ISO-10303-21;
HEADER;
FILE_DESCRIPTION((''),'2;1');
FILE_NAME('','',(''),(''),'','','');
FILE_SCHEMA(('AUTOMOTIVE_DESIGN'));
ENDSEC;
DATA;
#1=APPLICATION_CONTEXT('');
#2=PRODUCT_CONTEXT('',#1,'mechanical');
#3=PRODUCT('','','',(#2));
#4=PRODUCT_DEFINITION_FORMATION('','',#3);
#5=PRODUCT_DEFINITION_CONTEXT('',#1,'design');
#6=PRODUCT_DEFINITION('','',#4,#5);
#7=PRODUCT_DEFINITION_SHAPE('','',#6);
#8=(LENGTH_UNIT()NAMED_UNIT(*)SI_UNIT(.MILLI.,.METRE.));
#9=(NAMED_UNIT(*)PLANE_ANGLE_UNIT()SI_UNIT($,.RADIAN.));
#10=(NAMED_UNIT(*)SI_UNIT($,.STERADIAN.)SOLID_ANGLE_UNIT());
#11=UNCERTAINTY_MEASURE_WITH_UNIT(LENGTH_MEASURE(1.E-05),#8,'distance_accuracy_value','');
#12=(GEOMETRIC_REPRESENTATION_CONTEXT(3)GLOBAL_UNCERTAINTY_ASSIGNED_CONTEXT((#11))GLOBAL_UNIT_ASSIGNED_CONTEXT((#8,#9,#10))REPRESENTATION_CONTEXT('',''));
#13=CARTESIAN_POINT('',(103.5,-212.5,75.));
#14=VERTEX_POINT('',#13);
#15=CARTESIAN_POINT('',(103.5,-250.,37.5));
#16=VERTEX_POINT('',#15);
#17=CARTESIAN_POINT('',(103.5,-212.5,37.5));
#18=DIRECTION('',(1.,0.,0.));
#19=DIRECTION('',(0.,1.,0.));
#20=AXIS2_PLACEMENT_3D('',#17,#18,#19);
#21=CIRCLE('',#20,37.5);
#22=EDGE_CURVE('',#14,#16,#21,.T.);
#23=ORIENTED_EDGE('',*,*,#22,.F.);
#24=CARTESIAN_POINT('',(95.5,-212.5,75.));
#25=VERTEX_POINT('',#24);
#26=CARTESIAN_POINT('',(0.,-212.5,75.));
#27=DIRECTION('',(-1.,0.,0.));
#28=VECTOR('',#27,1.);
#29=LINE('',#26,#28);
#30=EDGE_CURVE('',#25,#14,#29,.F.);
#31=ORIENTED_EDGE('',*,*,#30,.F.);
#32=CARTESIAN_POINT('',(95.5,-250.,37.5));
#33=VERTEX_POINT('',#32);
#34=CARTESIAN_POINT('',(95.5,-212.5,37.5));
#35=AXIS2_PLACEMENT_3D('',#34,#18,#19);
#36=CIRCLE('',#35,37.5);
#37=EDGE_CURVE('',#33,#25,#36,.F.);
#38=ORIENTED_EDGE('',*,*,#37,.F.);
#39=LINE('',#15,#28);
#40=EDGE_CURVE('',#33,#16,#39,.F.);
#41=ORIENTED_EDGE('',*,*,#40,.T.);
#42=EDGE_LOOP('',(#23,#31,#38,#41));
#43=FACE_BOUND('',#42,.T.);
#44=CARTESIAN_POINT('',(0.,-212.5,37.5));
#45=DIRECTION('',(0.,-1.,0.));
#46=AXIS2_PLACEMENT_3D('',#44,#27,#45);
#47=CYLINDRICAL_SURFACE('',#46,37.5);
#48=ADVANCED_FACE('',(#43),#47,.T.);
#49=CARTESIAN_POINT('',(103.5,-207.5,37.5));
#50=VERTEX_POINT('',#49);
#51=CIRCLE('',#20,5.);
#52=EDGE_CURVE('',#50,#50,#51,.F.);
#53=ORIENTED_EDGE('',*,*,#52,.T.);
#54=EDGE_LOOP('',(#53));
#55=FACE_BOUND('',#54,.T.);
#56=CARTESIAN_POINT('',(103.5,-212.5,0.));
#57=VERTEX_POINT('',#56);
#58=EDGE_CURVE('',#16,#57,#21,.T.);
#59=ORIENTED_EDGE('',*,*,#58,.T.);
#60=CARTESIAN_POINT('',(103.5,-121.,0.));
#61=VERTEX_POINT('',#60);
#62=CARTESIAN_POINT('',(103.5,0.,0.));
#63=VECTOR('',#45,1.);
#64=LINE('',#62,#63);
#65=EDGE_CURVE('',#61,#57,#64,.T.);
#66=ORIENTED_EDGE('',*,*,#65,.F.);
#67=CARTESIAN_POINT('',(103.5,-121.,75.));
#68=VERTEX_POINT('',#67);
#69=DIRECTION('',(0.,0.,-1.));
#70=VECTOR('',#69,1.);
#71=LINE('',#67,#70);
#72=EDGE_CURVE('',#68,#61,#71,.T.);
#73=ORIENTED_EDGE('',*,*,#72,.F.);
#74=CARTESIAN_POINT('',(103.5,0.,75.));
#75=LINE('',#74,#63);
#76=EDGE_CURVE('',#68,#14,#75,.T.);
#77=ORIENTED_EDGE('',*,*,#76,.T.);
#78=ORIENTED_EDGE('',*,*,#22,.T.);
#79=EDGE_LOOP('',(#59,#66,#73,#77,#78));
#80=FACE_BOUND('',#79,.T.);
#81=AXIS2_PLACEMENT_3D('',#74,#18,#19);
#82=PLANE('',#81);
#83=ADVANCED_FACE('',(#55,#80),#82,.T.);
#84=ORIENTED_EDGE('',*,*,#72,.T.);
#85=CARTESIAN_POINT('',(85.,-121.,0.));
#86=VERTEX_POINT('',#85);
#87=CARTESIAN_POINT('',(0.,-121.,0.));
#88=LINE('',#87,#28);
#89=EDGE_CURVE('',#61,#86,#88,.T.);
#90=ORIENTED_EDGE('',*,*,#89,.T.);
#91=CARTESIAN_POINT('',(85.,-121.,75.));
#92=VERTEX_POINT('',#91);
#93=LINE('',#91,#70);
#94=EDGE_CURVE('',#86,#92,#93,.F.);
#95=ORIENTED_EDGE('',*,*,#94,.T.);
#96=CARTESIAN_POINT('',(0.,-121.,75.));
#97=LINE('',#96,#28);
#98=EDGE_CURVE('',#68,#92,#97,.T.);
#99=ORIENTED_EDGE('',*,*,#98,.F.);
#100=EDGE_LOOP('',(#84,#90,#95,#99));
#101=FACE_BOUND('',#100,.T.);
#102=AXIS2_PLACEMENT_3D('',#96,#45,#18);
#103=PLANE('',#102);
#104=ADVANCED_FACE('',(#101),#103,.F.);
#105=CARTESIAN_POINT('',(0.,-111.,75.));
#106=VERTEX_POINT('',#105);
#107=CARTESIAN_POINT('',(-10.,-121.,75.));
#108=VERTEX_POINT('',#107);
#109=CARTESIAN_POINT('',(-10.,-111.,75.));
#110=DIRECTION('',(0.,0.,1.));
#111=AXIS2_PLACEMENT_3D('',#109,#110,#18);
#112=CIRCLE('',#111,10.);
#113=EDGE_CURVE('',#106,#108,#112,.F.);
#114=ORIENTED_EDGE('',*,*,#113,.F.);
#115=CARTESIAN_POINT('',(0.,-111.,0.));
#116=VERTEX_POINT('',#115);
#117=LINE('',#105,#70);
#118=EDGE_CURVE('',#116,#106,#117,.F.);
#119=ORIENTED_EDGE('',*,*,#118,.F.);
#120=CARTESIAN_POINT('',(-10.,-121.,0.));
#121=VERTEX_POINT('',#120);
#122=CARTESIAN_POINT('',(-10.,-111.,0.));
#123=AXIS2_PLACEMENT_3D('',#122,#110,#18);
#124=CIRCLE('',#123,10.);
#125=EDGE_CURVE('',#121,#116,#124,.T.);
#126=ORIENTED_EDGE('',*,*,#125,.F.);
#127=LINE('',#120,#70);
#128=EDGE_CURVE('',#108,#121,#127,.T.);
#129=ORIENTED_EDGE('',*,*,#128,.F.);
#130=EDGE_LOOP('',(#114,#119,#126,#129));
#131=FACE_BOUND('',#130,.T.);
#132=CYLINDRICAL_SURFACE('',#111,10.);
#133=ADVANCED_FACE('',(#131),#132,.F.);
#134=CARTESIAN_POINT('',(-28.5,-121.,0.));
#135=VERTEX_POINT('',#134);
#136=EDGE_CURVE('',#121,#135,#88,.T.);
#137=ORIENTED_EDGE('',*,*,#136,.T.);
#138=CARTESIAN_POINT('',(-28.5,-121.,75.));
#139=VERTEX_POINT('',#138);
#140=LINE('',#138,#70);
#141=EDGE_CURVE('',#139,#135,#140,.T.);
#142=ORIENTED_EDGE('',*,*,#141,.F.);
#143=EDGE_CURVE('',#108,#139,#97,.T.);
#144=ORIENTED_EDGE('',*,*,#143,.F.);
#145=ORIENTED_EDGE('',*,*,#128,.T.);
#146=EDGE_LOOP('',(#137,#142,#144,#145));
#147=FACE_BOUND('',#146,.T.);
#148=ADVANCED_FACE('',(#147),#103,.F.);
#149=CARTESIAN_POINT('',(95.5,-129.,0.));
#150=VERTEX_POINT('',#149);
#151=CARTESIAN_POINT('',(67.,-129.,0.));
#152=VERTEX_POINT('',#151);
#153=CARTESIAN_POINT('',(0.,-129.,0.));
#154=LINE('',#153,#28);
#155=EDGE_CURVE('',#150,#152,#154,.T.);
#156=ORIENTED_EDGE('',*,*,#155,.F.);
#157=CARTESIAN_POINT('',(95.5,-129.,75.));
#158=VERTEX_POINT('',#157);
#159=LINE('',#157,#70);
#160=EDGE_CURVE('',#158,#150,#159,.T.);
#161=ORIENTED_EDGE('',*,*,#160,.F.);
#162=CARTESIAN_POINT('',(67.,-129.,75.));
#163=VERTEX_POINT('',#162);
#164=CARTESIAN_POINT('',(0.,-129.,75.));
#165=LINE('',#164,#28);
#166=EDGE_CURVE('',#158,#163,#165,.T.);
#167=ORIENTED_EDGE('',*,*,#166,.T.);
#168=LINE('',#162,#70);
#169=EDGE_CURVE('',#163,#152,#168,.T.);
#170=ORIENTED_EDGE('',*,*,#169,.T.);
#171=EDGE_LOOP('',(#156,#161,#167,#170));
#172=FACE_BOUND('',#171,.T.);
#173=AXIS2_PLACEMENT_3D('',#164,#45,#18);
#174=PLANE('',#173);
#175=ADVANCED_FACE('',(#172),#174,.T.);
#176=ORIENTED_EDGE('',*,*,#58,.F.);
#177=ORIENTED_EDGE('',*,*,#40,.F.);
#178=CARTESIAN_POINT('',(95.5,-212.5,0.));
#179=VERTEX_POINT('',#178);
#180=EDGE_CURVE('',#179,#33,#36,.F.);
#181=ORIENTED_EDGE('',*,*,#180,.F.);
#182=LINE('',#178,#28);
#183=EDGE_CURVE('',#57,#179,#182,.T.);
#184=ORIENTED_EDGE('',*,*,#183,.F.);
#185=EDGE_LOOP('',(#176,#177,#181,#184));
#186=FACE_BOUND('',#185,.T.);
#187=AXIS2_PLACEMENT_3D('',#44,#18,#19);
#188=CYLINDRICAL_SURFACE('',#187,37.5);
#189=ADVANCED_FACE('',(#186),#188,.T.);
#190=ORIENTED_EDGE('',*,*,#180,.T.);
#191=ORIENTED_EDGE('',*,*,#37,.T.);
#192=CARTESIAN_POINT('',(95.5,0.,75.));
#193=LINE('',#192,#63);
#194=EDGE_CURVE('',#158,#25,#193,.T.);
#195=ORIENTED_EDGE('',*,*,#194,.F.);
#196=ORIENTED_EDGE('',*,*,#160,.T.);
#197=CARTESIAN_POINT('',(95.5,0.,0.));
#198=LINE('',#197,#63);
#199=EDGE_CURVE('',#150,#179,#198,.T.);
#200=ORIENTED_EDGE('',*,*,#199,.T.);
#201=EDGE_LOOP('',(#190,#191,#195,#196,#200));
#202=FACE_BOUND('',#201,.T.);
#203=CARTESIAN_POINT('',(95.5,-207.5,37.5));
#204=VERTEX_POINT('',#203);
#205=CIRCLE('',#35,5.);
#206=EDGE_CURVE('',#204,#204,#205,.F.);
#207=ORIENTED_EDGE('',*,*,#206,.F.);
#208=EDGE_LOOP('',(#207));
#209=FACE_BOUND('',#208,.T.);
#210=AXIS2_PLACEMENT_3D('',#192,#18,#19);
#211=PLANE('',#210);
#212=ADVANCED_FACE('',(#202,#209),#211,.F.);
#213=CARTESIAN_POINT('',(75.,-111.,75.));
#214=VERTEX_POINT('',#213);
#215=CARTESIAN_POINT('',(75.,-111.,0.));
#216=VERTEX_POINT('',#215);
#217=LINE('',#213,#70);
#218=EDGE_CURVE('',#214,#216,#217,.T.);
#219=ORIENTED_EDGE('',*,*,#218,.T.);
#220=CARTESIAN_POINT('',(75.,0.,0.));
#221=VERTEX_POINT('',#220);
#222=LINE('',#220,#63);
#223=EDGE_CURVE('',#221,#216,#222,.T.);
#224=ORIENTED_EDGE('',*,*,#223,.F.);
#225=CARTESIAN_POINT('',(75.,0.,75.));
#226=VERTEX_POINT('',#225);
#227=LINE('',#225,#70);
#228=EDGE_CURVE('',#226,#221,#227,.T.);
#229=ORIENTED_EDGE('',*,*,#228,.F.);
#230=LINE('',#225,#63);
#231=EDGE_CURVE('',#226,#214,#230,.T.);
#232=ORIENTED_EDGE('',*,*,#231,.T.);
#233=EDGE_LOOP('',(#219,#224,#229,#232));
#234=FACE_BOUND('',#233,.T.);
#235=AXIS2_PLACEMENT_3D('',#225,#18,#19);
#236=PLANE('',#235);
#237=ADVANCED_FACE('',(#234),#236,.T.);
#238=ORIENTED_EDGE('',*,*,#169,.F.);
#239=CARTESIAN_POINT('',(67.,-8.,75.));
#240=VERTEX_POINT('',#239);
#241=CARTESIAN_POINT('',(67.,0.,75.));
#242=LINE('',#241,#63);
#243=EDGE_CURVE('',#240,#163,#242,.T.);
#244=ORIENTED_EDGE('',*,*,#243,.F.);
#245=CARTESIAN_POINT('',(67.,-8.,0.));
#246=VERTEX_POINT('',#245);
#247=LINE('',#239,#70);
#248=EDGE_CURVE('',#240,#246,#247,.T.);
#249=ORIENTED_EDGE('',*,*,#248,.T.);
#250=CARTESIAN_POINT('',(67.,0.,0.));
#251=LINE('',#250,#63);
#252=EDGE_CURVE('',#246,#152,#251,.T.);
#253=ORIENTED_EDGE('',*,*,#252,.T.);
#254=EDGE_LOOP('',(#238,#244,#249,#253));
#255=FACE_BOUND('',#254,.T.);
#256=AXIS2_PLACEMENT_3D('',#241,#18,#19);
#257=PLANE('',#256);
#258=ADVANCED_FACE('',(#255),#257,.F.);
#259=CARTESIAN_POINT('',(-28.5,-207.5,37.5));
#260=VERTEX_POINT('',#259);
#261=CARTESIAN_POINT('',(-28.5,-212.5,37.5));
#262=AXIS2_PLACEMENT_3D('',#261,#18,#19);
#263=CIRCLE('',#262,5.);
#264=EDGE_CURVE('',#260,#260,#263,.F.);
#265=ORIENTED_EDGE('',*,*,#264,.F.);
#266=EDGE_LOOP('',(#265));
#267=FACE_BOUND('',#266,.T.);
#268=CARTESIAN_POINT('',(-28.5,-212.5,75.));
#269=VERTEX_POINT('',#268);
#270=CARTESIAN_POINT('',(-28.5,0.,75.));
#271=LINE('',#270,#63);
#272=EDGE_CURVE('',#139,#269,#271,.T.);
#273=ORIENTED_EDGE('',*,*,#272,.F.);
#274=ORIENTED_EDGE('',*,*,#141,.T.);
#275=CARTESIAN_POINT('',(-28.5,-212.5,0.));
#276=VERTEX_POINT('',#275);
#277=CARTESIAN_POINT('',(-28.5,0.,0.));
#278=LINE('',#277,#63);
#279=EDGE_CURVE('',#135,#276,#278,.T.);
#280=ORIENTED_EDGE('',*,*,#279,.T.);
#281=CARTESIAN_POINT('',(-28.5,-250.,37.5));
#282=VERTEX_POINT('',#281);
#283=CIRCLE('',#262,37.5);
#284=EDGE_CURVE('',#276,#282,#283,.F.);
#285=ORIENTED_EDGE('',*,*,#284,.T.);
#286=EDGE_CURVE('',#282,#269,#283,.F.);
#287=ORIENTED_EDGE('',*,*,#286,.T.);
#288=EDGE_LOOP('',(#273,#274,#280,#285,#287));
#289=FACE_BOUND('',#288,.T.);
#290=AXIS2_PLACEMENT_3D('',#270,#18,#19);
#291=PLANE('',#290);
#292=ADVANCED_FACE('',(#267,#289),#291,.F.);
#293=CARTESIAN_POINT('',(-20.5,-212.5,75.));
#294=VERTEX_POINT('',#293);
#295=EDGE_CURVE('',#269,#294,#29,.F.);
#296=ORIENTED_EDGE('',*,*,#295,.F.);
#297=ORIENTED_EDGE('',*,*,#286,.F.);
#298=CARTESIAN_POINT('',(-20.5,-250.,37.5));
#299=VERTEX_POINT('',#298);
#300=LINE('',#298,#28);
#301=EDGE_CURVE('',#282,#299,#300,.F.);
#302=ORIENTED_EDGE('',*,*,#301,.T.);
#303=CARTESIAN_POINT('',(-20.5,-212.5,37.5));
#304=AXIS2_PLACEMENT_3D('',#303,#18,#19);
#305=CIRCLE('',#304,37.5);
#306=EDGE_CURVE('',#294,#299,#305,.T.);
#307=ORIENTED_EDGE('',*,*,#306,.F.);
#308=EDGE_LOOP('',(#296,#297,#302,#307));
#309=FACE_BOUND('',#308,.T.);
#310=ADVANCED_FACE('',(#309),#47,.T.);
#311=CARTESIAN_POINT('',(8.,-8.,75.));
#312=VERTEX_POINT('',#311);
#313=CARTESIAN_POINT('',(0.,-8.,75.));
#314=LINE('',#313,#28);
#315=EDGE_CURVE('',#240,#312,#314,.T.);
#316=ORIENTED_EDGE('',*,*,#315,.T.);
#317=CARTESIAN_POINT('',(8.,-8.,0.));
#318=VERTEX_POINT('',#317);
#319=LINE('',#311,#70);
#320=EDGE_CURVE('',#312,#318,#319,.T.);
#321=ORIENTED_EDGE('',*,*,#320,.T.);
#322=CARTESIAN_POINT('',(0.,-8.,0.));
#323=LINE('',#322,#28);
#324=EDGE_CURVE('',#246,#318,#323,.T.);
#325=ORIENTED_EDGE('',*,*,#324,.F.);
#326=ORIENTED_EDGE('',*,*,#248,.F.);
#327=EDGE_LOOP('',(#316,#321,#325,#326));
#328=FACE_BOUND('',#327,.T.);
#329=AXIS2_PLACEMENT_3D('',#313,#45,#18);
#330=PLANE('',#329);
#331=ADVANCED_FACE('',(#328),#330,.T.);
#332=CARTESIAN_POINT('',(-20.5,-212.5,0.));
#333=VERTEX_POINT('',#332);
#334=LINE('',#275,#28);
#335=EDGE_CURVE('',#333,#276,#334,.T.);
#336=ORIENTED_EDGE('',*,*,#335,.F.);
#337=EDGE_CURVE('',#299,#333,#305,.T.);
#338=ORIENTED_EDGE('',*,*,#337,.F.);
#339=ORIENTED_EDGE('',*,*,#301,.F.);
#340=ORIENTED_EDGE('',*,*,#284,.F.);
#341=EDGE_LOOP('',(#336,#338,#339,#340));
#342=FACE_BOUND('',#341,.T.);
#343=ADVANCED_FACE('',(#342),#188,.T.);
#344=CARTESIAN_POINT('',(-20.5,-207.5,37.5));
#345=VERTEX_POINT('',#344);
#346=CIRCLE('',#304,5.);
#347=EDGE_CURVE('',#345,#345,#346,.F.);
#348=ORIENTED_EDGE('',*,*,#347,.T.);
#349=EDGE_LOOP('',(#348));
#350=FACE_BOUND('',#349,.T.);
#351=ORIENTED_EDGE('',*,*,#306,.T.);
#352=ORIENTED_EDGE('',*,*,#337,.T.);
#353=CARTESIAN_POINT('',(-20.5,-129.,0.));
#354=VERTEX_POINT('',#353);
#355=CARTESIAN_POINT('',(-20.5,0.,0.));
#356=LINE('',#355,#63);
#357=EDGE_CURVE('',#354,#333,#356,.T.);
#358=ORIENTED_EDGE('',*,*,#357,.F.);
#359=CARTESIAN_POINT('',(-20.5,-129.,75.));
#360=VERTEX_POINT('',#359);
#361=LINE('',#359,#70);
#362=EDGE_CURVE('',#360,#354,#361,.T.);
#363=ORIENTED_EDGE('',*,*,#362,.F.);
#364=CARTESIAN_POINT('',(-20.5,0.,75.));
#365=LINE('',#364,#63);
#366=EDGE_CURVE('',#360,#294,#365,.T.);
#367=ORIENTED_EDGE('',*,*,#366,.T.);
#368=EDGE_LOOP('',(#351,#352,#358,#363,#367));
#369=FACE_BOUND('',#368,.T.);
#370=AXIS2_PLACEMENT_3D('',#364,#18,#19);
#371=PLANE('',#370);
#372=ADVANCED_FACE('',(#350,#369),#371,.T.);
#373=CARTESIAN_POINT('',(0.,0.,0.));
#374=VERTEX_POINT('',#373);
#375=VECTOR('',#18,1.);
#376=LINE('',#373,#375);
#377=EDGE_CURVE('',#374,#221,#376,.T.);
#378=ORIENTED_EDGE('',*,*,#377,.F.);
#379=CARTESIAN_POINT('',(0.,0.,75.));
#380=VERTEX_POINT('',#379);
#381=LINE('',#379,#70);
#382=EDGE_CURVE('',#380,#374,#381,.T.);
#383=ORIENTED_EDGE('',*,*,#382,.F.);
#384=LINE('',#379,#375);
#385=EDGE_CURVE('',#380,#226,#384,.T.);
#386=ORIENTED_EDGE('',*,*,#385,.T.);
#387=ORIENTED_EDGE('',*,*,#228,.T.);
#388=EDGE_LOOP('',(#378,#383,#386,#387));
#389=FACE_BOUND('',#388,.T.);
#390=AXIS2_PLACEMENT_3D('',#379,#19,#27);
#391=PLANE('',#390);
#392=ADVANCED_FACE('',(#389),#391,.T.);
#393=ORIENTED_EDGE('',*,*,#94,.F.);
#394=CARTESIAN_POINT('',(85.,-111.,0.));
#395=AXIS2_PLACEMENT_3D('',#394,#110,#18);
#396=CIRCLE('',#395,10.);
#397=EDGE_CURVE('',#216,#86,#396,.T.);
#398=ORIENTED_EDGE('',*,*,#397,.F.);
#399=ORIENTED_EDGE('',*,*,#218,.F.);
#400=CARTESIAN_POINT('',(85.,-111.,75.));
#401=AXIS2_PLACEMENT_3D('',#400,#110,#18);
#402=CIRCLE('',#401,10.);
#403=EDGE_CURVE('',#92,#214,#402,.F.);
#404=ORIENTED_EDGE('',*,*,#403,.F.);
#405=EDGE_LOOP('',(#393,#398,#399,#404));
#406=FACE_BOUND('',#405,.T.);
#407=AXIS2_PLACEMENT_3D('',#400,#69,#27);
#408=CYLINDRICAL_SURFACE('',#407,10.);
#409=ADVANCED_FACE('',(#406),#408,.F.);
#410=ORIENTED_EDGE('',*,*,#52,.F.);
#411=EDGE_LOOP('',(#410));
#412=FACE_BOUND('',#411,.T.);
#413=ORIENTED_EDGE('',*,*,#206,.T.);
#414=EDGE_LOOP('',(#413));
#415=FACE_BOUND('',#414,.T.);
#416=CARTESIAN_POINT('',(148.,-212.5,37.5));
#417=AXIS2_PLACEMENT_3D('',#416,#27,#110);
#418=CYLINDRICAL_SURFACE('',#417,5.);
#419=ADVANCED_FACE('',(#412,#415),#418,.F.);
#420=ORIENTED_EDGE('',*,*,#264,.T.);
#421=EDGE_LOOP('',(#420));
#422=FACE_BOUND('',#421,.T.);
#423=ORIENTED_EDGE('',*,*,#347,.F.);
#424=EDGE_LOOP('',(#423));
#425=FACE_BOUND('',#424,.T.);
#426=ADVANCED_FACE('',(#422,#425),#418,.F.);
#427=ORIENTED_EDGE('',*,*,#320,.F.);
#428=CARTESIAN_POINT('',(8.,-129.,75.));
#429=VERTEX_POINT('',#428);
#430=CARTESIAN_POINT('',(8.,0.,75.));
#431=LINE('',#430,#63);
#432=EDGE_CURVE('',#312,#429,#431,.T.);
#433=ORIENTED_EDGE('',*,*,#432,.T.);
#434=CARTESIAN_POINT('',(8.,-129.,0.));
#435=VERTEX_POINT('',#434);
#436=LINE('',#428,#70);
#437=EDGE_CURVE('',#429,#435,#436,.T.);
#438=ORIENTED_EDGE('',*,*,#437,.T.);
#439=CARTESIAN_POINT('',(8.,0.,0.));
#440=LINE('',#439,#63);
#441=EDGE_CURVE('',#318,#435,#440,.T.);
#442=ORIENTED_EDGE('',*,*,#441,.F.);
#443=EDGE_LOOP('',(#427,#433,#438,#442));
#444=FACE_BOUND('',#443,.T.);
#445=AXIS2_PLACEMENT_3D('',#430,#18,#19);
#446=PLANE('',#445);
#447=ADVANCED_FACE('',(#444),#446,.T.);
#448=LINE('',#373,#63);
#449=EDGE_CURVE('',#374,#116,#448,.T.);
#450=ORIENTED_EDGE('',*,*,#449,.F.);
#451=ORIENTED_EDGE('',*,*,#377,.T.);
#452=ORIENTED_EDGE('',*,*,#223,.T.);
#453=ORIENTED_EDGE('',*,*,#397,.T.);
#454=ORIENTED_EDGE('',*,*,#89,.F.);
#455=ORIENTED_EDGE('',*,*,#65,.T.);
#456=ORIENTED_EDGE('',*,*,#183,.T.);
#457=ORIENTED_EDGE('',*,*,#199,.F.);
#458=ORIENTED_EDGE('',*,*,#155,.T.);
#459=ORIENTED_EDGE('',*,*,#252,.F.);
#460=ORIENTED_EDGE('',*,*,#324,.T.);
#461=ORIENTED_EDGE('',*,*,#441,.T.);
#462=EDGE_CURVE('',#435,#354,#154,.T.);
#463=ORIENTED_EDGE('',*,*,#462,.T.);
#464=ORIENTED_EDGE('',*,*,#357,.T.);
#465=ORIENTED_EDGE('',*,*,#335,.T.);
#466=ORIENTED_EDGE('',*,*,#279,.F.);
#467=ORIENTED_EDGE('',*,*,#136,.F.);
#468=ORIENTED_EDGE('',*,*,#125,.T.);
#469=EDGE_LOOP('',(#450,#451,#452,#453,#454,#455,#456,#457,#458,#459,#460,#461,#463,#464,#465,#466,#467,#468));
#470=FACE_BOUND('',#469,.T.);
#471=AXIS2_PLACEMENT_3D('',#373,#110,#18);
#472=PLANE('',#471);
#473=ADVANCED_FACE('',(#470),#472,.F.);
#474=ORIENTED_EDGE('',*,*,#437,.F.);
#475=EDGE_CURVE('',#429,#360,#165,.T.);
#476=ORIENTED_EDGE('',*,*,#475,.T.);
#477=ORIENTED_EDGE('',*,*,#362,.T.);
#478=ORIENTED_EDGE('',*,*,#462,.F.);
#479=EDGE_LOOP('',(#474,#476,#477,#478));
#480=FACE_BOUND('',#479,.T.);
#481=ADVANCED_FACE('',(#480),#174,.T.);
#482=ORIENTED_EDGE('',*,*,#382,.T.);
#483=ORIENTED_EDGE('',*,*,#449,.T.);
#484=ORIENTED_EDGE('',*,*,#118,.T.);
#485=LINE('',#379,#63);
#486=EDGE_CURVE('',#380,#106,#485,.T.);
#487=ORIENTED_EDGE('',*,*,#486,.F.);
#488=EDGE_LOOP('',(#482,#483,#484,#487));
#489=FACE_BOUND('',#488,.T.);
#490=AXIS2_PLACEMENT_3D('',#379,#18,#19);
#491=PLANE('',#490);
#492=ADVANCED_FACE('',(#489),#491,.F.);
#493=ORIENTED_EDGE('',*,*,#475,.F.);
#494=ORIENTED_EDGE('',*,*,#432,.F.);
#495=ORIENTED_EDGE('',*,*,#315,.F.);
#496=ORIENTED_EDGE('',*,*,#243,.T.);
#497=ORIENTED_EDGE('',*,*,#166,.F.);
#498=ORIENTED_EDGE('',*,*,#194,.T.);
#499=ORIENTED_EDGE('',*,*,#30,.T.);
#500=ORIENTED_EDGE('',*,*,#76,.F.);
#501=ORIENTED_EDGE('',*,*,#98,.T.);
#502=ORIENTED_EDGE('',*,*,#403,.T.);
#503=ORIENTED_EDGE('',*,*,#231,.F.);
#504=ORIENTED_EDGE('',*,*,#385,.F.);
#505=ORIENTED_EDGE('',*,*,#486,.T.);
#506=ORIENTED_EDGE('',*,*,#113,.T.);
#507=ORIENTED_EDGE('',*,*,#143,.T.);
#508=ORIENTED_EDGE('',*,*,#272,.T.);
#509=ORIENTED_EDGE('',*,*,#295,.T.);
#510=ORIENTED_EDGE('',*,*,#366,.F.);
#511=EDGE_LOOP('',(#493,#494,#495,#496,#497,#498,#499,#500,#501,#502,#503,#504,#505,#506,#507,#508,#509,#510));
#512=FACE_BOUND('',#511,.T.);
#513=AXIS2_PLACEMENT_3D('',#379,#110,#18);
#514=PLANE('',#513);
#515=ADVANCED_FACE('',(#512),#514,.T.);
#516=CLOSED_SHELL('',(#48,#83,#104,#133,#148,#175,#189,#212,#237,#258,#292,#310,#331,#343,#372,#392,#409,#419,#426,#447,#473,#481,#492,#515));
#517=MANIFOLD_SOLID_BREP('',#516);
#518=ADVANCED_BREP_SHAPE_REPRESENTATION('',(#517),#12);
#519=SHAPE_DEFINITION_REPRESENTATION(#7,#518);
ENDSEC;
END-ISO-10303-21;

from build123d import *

# Parameters (mm, degrees)
BOSS_EXTRUDE2_DEPTH     = 75
CUT_EXTRUDE1_DEPTH      = 148
CUT_EXTRUDE1_DEPTH_BACK = 47
SKETCH2_R               = 5
FILLET1_R               = 37.5
FILLET2_R               = 10


with BuildPart() as part:
    # Sketch1 → Boss-Extrude2 (new body)
    with BuildSketch(Plane.XY):
        Polygon((8, -117), (8, -8), (67, -8), (67, -117), (67, -121), (67, -129), (95.5, -129), (95.5, -250), (103.5, -250), (103.5, -121), (75, -121), (75, -8), (75, 0), (67, 0), (8, 0), (0, 0), (0, -8), (0, -121), (-28.5, -121), (-28.5, -250), (-20.5, -250), (-20.5, -129), (8, -129), (8, -125), (8, -121), align=None)
    extrude(amount=BOSS_EXTRUDE2_DEPTH)

    # Sketch2 → Cut-Extrude1 (cut, two sides: drawn at the far end of the back side and taken through both)
    with BuildSketch(Plane(origin=(0, 0, 0), x_dir=(0, 0, -1), z_dir=(1, 0, 0)).offset(-CUT_EXTRUDE1_DEPTH_BACK)):
        with Locations(Location((-37.5, -212.5, 0), (0, 0, 90))):
            Circle(SKETCH2_R)
    extrude(amount=CUT_EXTRUDE1_DEPTH + CUT_EXTRUDE1_DEPTH_BACK, mode=Mode.SUBTRACT)

    # Fillet1
    fillet1_edges = [part.edges().sort_by_distance(p)[0] for p in [
        (-24.5, -250, 0),
        (-24.5, -250, 75),
        (99.5, -250, 0),
        (99.5, -250, 75),
    ]]
    fillet(fillet1_edges, radius=FILLET1_R - 0.0001)  # a hair under: the kernel refuses the full size

    # Fillet2
    fillet2_edges = [part.edges().sort_by_distance(p)[0] for p in [
        (0, -121, 37.5),
        (75, -121, 37.5),
    ]]
    fillet(fillet2_edges, radius=FILLET2_R)


solid = part.part
